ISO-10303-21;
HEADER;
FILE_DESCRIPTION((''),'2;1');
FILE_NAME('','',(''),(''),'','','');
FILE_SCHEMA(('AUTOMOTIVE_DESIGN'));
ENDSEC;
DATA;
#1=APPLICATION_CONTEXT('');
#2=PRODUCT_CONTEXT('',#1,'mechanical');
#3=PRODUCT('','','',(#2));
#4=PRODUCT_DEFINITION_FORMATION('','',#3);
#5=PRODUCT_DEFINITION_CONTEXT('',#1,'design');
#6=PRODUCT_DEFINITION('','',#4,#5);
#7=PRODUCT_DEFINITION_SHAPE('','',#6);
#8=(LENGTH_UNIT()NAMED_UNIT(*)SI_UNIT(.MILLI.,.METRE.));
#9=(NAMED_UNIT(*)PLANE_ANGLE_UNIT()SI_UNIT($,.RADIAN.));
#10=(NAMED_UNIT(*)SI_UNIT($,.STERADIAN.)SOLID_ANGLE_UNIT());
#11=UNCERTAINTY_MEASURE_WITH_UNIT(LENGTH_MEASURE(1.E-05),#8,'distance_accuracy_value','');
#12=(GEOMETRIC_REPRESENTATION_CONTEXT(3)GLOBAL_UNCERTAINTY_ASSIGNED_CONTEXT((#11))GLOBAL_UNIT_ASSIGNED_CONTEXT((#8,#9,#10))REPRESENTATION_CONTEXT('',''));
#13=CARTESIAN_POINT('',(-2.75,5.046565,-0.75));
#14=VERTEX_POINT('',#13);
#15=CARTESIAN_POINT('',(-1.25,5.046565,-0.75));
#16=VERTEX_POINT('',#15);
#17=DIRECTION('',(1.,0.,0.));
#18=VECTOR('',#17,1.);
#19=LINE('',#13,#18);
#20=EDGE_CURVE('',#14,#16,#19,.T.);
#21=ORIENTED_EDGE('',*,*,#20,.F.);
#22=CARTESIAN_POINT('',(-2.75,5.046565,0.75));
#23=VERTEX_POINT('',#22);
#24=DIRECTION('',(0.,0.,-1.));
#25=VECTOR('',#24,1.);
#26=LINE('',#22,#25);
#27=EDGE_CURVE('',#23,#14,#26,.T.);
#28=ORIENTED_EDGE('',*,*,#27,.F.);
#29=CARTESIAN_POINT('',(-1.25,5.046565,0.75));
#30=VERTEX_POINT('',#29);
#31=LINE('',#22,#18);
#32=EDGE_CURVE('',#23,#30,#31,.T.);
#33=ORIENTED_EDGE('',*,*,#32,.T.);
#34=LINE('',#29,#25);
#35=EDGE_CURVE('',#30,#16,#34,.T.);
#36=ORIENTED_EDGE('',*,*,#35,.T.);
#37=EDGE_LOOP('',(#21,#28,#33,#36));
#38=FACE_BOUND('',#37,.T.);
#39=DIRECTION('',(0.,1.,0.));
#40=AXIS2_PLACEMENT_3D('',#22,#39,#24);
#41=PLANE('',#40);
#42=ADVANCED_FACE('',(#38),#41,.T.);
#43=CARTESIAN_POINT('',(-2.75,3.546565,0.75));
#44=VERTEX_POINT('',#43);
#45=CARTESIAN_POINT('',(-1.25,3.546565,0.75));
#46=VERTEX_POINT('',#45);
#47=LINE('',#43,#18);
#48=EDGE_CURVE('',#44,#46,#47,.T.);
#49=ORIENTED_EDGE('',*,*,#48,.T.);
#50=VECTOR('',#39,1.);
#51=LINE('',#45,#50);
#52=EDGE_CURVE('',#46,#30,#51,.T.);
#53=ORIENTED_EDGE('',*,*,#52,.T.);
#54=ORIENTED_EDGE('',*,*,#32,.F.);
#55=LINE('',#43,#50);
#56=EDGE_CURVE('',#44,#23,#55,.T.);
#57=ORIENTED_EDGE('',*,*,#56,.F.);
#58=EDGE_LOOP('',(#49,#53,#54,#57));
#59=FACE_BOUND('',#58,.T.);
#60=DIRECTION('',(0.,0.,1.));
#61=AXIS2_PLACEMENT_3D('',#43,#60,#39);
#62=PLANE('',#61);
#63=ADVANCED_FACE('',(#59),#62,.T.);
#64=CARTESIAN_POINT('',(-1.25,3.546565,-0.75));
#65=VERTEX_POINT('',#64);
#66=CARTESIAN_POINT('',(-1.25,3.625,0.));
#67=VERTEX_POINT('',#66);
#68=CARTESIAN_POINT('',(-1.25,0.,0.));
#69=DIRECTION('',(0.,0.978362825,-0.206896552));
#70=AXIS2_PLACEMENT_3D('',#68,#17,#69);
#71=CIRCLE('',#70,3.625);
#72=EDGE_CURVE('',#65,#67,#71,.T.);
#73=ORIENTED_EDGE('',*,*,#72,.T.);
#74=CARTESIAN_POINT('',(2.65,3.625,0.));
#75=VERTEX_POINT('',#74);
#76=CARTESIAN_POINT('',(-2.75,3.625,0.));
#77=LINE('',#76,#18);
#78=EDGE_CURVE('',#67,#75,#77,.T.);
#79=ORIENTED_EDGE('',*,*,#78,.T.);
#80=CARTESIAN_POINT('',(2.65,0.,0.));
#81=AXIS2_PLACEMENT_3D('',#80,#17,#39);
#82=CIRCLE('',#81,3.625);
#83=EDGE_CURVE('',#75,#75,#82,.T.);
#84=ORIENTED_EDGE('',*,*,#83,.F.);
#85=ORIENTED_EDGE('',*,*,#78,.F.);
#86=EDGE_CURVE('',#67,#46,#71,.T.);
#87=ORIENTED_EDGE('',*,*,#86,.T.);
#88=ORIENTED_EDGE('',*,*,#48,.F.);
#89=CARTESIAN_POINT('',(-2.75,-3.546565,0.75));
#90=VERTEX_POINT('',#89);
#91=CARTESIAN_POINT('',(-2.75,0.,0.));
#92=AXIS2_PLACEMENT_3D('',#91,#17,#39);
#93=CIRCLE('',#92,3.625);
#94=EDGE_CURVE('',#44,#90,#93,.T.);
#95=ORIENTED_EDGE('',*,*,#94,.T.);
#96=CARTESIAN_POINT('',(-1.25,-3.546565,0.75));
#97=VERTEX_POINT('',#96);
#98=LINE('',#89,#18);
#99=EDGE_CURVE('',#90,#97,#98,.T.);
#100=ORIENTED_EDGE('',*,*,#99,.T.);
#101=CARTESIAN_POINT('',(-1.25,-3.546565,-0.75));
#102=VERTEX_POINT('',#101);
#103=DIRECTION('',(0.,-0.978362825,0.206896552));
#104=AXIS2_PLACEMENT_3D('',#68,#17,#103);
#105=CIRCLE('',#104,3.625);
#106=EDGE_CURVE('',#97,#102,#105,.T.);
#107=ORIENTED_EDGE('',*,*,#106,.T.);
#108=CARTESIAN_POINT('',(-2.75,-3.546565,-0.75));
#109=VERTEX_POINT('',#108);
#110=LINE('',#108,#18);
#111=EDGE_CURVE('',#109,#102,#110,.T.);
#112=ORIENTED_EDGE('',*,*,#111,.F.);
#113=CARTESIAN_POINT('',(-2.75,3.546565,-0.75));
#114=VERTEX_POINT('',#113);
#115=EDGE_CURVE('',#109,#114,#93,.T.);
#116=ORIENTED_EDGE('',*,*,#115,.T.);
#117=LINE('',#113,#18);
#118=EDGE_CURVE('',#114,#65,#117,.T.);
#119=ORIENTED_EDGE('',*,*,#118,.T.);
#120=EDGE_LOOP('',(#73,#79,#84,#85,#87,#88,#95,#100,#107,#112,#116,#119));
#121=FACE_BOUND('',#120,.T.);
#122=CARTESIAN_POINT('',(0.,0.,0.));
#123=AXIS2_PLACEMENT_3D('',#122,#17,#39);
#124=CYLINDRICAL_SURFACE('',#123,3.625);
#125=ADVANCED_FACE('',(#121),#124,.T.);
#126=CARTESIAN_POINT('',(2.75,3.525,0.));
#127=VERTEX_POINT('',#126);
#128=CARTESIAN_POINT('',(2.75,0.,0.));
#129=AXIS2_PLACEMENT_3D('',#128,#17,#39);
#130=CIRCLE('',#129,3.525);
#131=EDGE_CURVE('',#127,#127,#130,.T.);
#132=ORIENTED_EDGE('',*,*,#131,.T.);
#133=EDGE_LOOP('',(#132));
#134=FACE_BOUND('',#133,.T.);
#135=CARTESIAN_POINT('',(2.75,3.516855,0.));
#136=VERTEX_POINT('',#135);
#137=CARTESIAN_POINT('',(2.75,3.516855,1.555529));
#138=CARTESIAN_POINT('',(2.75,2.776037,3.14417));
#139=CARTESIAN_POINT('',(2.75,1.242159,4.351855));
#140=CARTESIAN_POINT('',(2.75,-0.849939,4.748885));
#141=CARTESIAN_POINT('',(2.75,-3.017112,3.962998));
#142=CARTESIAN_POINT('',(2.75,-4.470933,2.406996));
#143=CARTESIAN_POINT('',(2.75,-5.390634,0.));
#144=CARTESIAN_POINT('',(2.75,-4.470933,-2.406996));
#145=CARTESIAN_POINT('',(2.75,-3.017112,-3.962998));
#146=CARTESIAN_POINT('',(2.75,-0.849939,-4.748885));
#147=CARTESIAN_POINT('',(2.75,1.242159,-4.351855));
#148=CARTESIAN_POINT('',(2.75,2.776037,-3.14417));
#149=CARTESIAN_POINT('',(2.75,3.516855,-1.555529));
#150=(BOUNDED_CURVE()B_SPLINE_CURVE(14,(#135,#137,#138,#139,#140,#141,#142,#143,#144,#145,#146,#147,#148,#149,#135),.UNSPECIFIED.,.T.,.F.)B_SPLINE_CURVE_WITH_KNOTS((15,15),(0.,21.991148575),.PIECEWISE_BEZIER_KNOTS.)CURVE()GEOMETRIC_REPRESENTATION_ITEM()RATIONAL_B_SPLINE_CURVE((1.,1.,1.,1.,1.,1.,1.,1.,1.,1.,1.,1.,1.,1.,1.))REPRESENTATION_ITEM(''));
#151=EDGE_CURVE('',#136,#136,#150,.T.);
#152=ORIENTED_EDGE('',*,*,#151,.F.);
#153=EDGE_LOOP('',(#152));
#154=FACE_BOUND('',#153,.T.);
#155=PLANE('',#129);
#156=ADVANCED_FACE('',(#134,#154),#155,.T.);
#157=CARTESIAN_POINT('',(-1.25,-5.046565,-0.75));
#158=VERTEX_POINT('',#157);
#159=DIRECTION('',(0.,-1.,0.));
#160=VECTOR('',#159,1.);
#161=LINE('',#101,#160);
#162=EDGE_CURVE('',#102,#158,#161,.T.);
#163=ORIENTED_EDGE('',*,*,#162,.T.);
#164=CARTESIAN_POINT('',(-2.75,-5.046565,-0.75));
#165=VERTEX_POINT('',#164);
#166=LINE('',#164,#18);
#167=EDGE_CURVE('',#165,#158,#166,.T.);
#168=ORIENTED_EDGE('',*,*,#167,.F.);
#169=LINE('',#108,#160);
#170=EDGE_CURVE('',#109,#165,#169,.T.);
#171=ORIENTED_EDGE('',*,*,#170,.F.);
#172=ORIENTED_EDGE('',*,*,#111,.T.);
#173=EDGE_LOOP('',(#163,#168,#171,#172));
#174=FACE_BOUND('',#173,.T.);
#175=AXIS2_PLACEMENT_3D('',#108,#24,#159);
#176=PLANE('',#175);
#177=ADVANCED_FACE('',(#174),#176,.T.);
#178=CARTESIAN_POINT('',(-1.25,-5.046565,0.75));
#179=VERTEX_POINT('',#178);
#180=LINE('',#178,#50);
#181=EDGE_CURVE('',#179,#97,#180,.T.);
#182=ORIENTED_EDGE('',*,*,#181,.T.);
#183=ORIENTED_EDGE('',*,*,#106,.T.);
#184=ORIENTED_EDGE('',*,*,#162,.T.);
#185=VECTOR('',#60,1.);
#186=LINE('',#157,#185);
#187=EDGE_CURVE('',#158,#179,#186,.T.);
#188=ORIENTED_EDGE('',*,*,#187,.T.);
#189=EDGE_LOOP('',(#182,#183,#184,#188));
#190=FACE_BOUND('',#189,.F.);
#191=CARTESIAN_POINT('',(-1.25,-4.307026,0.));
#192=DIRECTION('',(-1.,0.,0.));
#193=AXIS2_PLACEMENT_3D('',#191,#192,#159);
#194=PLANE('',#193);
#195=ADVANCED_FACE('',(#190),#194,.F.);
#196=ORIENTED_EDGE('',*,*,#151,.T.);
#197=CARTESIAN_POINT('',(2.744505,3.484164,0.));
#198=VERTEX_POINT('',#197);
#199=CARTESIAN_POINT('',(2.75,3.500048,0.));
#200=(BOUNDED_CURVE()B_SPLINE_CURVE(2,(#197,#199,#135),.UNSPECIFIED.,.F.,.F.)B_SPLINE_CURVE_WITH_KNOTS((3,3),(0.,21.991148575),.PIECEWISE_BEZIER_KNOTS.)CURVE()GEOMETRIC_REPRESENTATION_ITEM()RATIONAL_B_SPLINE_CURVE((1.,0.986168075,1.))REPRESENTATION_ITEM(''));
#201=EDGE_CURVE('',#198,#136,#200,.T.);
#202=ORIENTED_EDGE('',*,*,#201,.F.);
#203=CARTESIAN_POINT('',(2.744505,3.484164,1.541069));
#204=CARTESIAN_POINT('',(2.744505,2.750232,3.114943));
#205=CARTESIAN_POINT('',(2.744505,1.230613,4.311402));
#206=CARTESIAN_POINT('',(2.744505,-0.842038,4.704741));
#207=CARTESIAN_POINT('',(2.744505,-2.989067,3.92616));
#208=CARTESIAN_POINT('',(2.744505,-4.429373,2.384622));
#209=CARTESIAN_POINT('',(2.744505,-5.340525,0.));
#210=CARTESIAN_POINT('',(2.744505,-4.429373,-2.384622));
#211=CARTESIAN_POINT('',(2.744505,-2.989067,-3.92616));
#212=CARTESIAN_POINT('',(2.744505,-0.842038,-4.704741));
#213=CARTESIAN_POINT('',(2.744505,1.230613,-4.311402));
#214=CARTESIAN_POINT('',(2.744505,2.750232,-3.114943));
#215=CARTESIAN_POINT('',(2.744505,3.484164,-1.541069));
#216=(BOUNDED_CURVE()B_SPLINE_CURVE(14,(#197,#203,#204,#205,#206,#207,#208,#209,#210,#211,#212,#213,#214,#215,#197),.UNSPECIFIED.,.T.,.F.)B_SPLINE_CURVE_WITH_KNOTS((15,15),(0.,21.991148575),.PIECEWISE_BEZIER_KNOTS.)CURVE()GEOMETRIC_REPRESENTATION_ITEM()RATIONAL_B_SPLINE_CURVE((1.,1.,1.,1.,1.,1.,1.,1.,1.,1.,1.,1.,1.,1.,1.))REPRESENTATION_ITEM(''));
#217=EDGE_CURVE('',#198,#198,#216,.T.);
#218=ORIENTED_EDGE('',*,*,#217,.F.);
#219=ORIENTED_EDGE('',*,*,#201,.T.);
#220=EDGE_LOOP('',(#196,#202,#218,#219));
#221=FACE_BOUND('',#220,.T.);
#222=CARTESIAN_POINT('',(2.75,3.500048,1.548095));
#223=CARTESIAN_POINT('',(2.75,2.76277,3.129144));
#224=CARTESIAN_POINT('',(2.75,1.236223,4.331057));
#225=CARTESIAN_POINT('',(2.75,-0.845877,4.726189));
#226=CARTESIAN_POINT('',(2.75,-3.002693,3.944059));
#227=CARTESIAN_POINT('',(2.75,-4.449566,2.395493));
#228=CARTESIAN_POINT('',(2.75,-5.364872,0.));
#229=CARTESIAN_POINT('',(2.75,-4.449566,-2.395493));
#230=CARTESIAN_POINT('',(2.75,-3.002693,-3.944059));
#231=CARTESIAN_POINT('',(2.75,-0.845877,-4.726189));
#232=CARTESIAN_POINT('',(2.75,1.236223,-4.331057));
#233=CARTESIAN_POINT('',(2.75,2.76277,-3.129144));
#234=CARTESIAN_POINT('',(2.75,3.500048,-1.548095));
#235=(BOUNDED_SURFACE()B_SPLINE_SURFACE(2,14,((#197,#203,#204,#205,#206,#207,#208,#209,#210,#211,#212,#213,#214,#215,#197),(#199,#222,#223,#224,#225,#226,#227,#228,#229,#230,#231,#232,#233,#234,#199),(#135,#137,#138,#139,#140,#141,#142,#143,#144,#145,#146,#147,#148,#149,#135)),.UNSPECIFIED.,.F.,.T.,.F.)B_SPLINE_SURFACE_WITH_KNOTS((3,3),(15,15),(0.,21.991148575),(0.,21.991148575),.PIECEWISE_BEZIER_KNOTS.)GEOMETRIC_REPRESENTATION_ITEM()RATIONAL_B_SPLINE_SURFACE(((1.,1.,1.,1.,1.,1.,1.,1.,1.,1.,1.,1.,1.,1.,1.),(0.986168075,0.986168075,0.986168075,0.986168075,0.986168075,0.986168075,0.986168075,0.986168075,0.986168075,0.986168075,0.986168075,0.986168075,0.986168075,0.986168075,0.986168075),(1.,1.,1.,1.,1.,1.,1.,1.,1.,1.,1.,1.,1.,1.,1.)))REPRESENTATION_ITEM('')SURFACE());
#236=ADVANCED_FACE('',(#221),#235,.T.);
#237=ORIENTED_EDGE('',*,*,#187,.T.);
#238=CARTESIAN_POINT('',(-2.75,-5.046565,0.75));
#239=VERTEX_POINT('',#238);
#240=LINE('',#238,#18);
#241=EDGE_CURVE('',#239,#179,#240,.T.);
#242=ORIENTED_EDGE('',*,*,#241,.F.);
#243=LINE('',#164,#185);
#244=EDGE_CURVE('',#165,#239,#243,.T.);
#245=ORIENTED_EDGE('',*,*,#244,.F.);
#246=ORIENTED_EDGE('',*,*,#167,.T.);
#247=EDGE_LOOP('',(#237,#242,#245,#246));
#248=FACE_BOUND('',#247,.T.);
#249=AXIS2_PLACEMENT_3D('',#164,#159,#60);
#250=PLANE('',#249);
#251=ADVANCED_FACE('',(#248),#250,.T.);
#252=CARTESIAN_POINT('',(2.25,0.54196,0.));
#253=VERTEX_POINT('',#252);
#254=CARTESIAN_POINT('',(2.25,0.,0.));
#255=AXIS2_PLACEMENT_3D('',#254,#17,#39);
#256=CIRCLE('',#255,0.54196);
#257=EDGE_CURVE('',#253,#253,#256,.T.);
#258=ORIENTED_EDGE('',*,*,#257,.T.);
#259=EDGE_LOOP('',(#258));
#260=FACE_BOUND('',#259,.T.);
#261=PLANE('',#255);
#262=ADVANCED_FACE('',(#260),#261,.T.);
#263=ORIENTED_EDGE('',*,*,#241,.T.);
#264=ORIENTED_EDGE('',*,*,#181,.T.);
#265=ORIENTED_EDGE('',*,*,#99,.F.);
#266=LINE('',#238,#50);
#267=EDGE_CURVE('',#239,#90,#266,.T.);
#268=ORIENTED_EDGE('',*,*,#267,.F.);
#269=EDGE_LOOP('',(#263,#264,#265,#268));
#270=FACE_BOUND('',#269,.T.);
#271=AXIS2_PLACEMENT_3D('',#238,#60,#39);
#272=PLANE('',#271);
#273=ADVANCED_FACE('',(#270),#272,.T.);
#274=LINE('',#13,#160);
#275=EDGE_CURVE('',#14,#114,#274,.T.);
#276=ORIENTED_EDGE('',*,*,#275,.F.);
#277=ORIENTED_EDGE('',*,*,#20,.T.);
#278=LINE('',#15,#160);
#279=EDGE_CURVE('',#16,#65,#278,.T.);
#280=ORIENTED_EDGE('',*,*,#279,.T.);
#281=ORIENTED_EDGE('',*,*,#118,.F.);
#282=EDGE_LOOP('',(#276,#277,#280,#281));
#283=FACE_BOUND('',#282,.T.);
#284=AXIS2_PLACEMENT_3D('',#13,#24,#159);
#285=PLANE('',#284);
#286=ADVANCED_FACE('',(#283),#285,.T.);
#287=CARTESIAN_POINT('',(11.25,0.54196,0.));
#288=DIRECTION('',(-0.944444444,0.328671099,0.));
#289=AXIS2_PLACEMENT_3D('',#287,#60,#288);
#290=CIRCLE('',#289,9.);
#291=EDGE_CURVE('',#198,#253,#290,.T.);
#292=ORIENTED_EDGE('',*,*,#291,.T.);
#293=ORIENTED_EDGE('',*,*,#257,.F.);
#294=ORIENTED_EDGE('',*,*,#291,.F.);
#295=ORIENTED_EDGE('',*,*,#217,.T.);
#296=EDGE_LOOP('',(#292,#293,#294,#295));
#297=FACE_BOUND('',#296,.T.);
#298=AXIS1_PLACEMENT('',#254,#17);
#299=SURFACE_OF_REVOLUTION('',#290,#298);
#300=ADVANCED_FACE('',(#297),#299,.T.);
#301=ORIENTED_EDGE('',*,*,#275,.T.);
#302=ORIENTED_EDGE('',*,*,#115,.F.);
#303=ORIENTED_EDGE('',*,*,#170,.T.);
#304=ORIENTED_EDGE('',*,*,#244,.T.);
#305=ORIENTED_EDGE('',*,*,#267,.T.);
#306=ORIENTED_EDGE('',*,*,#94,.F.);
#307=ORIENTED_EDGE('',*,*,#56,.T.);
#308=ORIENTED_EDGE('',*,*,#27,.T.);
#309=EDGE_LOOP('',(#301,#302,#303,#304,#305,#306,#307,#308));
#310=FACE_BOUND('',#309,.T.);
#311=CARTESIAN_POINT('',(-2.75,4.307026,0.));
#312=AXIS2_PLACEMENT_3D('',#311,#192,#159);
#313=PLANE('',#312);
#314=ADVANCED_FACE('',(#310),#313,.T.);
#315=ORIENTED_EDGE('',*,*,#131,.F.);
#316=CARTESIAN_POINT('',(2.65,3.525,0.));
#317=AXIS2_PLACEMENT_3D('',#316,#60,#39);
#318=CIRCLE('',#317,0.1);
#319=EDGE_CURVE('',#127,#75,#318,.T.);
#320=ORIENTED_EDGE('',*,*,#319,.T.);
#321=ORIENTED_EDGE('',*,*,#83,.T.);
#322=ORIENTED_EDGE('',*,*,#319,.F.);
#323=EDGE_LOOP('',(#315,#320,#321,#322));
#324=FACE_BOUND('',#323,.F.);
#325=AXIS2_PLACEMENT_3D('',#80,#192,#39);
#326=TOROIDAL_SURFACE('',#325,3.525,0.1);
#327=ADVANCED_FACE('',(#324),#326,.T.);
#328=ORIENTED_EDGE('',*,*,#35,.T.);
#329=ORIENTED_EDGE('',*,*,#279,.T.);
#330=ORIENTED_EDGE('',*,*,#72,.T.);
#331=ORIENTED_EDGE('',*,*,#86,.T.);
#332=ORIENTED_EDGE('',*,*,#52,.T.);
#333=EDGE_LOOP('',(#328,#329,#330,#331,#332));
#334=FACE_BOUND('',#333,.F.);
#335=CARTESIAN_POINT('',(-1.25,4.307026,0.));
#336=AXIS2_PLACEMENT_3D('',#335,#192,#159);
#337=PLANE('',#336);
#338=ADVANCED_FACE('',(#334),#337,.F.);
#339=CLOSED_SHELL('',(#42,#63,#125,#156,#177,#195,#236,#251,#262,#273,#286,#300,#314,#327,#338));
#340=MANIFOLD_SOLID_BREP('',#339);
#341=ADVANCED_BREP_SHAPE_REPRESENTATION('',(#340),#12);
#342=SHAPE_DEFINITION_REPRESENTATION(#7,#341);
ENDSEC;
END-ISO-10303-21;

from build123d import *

# Parameters (mm, degrees)
F0_R     = 3.625
F1_DEPTH = 2.75
F3_DEPTH = 1.5
F4_R     = 3.5
F5_DEPTH = 0.5
F7_R     = 0.1


# Not quite as in the source:
# - a fillet or chamfer that OpenCascade refuses, or shapes differently, is made with other operations: its cross-section is extruded or revolved along the edge and cut away or added


with BuildPart() as f1:
    # F0 (on Right) → F1 (new body, symmetric)
    with BuildSketch(Plane.YZ):
        Circle(F0_R)
    extrude(amount=F1_DEPTH, both=True)

    # F2 (on face) → F3 (join)
    with BuildSketch(Plane(origin=(-2.75, 0, 0), x_dir=(0, -1, 0), z_dir=(-1, 0, 0))):
        with BuildLine():
            Line((3.5465652398, -0.75), (5.0465652398, -0.75))
            Line((5.0465652398, -0.75), (5.0465652398, 0.75))
            Line((5.0465652398, 0.75), (3.5465652398, 0.75))
            ThreePointArc((3.5465652398, 0.75), (3.625, 0), (3.5465652398, -0.75))
        make_face()
        with BuildLine():
            Line((-3.5465652398, 0.75), (-5.0465652398, 0.75))
            Line((-5.0465652398, 0.75), (-5.0465652398, -0.75))
            Line((-5.0465652398, -0.75), (-3.5465652398, -0.75))
            ThreePointArc((-3.5465652398, -0.75), (-3.625, 0), (-3.5465652398, 0.75))
        make_face()
    extrude(amount=-F3_DEPTH)

    # F4 (on face) → F5 (cut)
    with BuildSketch(Plane.YZ.offset(2.75)):
        Circle(F4_R)
    extrude(amount=-F5_DEPTH, mode=Mode.SUBTRACT)

    # F6: fillet of radius 9 on 1 edges, made by hand

    # F6_s1 → F6_t2 (revolve)
    with BuildSketch(Plane.XY):
        with BuildLine():
            ThreePointArc((2.75, 3.5), (2.3758803254, 2.0419601084), (2.25, 0.5419601084))
            Line((2.25, 0.5419601084), (2.25, 3.5))
            Line((2.25, 3.5), (2.75, 3.5))
        make_face()
    revolve(axis=Axis((2.25, 0, 0), (1, 0, 0)))

    # F7
    f7_edges = [f1.edges().sort_by_distance(p)[0] for p in [
        (2.75, -3.5, 0),
        (2.75, -3.625, 0),
    ]]
    fillet(f7_edges, radius=F7_R)


solid = f1.part
